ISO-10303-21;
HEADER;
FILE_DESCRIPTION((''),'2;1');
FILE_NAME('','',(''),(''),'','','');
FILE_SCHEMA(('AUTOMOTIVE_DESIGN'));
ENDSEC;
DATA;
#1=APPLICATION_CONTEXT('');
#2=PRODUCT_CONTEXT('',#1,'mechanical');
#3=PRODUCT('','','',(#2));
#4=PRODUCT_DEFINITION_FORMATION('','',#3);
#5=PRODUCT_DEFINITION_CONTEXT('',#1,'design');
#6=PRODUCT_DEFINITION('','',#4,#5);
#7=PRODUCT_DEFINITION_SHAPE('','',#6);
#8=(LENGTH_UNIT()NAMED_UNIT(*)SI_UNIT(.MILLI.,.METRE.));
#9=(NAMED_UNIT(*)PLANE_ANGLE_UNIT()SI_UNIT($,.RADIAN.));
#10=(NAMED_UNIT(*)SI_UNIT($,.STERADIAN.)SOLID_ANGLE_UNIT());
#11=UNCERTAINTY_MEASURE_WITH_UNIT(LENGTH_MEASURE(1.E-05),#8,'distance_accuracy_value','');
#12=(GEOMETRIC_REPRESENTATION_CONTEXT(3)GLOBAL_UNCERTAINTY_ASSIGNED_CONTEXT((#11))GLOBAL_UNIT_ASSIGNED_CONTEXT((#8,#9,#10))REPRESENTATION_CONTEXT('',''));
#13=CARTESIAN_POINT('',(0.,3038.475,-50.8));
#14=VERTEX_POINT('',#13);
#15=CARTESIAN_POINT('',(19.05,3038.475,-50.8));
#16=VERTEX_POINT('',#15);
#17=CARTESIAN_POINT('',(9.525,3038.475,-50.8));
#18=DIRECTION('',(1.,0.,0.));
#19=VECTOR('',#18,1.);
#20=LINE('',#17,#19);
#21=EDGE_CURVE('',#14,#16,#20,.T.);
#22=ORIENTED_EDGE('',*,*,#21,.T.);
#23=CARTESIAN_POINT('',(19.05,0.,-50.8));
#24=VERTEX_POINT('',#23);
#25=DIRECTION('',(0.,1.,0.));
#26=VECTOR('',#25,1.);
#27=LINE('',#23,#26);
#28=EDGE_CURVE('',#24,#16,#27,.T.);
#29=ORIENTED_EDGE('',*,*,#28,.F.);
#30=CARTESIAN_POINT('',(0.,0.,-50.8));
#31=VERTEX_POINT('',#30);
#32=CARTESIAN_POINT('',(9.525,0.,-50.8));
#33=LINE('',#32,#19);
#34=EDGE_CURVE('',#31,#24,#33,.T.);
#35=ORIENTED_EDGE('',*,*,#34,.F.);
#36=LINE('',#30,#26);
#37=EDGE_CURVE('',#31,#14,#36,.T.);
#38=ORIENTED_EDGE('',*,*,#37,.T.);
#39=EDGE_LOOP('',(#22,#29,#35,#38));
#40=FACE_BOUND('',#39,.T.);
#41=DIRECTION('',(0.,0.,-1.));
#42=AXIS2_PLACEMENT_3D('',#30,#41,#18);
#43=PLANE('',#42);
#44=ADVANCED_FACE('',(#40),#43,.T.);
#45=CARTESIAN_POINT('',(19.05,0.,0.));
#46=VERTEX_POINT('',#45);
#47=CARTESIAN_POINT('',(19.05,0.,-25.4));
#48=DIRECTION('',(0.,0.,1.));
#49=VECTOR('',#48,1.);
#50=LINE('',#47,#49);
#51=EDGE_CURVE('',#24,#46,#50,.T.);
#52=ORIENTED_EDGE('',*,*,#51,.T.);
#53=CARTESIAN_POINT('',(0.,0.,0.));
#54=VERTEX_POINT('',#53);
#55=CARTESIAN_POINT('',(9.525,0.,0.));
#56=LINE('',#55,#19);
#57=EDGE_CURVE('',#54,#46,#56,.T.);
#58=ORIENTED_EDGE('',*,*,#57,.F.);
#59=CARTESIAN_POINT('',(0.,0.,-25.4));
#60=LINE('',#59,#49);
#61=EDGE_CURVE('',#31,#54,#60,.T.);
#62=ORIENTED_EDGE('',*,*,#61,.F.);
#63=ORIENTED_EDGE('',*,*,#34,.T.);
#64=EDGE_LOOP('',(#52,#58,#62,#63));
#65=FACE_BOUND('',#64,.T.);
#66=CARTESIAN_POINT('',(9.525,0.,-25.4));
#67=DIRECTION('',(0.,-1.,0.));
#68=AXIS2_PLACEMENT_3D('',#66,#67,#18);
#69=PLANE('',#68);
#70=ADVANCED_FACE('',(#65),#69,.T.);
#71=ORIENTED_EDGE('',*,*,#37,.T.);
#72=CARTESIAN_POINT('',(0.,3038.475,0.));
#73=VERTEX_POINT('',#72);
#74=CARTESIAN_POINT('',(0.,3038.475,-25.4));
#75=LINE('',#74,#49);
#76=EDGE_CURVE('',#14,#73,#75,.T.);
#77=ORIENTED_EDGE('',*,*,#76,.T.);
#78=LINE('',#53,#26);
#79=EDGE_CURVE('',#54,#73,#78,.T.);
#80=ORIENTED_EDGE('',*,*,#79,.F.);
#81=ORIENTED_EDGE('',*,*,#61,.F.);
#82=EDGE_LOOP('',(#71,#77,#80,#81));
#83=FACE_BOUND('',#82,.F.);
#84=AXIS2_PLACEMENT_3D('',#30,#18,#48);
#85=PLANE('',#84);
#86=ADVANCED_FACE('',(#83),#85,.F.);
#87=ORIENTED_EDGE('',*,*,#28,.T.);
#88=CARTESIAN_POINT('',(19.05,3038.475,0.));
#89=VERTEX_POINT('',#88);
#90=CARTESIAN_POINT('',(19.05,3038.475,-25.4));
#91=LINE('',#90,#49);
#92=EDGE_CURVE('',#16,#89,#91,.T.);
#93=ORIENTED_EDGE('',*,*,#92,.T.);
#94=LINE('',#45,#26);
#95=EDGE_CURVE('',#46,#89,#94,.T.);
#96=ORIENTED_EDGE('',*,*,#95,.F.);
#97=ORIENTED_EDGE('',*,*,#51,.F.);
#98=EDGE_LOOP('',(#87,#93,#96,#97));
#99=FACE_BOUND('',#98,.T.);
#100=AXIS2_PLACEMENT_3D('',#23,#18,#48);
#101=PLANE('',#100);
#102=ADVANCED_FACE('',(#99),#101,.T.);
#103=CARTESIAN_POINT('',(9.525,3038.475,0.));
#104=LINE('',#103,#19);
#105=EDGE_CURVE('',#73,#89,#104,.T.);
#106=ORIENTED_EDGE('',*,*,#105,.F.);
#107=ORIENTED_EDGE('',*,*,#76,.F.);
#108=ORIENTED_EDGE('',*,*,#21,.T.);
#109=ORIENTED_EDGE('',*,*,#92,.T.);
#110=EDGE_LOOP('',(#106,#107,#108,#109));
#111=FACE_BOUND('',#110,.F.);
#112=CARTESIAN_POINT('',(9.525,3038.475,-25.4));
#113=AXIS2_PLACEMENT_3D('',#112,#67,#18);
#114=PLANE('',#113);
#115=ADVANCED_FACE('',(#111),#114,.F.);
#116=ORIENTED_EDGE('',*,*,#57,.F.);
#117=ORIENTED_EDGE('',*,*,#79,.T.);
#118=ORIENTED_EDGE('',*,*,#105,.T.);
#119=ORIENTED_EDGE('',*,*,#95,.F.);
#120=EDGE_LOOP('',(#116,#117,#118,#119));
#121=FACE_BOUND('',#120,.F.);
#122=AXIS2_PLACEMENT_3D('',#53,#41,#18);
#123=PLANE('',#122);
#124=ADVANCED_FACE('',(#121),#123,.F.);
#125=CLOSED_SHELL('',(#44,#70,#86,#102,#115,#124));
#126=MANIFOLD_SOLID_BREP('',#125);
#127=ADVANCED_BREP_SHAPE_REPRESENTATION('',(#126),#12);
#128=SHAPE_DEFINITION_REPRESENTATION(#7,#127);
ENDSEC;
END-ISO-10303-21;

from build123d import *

# Parameters (mm, degrees)
F0_W     = 19.05
F0_H     = 50.8
F1_DEPTH = 3038.475


# Not quite as in the source:
# - a length typed as a fraction of an inch, garbled in the dataset ("3 / 203.2 mm" for 3/8 in), is restored


with BuildPart() as f1:
    # F0 (on Front) → F1 (new body)
    with BuildSketch(Plane.XZ):
        with Locations((9.525, -25.4)):
            Rectangle(F0_W, F0_H)
    extrude(amount=-F1_DEPTH)


solid = f1.part
